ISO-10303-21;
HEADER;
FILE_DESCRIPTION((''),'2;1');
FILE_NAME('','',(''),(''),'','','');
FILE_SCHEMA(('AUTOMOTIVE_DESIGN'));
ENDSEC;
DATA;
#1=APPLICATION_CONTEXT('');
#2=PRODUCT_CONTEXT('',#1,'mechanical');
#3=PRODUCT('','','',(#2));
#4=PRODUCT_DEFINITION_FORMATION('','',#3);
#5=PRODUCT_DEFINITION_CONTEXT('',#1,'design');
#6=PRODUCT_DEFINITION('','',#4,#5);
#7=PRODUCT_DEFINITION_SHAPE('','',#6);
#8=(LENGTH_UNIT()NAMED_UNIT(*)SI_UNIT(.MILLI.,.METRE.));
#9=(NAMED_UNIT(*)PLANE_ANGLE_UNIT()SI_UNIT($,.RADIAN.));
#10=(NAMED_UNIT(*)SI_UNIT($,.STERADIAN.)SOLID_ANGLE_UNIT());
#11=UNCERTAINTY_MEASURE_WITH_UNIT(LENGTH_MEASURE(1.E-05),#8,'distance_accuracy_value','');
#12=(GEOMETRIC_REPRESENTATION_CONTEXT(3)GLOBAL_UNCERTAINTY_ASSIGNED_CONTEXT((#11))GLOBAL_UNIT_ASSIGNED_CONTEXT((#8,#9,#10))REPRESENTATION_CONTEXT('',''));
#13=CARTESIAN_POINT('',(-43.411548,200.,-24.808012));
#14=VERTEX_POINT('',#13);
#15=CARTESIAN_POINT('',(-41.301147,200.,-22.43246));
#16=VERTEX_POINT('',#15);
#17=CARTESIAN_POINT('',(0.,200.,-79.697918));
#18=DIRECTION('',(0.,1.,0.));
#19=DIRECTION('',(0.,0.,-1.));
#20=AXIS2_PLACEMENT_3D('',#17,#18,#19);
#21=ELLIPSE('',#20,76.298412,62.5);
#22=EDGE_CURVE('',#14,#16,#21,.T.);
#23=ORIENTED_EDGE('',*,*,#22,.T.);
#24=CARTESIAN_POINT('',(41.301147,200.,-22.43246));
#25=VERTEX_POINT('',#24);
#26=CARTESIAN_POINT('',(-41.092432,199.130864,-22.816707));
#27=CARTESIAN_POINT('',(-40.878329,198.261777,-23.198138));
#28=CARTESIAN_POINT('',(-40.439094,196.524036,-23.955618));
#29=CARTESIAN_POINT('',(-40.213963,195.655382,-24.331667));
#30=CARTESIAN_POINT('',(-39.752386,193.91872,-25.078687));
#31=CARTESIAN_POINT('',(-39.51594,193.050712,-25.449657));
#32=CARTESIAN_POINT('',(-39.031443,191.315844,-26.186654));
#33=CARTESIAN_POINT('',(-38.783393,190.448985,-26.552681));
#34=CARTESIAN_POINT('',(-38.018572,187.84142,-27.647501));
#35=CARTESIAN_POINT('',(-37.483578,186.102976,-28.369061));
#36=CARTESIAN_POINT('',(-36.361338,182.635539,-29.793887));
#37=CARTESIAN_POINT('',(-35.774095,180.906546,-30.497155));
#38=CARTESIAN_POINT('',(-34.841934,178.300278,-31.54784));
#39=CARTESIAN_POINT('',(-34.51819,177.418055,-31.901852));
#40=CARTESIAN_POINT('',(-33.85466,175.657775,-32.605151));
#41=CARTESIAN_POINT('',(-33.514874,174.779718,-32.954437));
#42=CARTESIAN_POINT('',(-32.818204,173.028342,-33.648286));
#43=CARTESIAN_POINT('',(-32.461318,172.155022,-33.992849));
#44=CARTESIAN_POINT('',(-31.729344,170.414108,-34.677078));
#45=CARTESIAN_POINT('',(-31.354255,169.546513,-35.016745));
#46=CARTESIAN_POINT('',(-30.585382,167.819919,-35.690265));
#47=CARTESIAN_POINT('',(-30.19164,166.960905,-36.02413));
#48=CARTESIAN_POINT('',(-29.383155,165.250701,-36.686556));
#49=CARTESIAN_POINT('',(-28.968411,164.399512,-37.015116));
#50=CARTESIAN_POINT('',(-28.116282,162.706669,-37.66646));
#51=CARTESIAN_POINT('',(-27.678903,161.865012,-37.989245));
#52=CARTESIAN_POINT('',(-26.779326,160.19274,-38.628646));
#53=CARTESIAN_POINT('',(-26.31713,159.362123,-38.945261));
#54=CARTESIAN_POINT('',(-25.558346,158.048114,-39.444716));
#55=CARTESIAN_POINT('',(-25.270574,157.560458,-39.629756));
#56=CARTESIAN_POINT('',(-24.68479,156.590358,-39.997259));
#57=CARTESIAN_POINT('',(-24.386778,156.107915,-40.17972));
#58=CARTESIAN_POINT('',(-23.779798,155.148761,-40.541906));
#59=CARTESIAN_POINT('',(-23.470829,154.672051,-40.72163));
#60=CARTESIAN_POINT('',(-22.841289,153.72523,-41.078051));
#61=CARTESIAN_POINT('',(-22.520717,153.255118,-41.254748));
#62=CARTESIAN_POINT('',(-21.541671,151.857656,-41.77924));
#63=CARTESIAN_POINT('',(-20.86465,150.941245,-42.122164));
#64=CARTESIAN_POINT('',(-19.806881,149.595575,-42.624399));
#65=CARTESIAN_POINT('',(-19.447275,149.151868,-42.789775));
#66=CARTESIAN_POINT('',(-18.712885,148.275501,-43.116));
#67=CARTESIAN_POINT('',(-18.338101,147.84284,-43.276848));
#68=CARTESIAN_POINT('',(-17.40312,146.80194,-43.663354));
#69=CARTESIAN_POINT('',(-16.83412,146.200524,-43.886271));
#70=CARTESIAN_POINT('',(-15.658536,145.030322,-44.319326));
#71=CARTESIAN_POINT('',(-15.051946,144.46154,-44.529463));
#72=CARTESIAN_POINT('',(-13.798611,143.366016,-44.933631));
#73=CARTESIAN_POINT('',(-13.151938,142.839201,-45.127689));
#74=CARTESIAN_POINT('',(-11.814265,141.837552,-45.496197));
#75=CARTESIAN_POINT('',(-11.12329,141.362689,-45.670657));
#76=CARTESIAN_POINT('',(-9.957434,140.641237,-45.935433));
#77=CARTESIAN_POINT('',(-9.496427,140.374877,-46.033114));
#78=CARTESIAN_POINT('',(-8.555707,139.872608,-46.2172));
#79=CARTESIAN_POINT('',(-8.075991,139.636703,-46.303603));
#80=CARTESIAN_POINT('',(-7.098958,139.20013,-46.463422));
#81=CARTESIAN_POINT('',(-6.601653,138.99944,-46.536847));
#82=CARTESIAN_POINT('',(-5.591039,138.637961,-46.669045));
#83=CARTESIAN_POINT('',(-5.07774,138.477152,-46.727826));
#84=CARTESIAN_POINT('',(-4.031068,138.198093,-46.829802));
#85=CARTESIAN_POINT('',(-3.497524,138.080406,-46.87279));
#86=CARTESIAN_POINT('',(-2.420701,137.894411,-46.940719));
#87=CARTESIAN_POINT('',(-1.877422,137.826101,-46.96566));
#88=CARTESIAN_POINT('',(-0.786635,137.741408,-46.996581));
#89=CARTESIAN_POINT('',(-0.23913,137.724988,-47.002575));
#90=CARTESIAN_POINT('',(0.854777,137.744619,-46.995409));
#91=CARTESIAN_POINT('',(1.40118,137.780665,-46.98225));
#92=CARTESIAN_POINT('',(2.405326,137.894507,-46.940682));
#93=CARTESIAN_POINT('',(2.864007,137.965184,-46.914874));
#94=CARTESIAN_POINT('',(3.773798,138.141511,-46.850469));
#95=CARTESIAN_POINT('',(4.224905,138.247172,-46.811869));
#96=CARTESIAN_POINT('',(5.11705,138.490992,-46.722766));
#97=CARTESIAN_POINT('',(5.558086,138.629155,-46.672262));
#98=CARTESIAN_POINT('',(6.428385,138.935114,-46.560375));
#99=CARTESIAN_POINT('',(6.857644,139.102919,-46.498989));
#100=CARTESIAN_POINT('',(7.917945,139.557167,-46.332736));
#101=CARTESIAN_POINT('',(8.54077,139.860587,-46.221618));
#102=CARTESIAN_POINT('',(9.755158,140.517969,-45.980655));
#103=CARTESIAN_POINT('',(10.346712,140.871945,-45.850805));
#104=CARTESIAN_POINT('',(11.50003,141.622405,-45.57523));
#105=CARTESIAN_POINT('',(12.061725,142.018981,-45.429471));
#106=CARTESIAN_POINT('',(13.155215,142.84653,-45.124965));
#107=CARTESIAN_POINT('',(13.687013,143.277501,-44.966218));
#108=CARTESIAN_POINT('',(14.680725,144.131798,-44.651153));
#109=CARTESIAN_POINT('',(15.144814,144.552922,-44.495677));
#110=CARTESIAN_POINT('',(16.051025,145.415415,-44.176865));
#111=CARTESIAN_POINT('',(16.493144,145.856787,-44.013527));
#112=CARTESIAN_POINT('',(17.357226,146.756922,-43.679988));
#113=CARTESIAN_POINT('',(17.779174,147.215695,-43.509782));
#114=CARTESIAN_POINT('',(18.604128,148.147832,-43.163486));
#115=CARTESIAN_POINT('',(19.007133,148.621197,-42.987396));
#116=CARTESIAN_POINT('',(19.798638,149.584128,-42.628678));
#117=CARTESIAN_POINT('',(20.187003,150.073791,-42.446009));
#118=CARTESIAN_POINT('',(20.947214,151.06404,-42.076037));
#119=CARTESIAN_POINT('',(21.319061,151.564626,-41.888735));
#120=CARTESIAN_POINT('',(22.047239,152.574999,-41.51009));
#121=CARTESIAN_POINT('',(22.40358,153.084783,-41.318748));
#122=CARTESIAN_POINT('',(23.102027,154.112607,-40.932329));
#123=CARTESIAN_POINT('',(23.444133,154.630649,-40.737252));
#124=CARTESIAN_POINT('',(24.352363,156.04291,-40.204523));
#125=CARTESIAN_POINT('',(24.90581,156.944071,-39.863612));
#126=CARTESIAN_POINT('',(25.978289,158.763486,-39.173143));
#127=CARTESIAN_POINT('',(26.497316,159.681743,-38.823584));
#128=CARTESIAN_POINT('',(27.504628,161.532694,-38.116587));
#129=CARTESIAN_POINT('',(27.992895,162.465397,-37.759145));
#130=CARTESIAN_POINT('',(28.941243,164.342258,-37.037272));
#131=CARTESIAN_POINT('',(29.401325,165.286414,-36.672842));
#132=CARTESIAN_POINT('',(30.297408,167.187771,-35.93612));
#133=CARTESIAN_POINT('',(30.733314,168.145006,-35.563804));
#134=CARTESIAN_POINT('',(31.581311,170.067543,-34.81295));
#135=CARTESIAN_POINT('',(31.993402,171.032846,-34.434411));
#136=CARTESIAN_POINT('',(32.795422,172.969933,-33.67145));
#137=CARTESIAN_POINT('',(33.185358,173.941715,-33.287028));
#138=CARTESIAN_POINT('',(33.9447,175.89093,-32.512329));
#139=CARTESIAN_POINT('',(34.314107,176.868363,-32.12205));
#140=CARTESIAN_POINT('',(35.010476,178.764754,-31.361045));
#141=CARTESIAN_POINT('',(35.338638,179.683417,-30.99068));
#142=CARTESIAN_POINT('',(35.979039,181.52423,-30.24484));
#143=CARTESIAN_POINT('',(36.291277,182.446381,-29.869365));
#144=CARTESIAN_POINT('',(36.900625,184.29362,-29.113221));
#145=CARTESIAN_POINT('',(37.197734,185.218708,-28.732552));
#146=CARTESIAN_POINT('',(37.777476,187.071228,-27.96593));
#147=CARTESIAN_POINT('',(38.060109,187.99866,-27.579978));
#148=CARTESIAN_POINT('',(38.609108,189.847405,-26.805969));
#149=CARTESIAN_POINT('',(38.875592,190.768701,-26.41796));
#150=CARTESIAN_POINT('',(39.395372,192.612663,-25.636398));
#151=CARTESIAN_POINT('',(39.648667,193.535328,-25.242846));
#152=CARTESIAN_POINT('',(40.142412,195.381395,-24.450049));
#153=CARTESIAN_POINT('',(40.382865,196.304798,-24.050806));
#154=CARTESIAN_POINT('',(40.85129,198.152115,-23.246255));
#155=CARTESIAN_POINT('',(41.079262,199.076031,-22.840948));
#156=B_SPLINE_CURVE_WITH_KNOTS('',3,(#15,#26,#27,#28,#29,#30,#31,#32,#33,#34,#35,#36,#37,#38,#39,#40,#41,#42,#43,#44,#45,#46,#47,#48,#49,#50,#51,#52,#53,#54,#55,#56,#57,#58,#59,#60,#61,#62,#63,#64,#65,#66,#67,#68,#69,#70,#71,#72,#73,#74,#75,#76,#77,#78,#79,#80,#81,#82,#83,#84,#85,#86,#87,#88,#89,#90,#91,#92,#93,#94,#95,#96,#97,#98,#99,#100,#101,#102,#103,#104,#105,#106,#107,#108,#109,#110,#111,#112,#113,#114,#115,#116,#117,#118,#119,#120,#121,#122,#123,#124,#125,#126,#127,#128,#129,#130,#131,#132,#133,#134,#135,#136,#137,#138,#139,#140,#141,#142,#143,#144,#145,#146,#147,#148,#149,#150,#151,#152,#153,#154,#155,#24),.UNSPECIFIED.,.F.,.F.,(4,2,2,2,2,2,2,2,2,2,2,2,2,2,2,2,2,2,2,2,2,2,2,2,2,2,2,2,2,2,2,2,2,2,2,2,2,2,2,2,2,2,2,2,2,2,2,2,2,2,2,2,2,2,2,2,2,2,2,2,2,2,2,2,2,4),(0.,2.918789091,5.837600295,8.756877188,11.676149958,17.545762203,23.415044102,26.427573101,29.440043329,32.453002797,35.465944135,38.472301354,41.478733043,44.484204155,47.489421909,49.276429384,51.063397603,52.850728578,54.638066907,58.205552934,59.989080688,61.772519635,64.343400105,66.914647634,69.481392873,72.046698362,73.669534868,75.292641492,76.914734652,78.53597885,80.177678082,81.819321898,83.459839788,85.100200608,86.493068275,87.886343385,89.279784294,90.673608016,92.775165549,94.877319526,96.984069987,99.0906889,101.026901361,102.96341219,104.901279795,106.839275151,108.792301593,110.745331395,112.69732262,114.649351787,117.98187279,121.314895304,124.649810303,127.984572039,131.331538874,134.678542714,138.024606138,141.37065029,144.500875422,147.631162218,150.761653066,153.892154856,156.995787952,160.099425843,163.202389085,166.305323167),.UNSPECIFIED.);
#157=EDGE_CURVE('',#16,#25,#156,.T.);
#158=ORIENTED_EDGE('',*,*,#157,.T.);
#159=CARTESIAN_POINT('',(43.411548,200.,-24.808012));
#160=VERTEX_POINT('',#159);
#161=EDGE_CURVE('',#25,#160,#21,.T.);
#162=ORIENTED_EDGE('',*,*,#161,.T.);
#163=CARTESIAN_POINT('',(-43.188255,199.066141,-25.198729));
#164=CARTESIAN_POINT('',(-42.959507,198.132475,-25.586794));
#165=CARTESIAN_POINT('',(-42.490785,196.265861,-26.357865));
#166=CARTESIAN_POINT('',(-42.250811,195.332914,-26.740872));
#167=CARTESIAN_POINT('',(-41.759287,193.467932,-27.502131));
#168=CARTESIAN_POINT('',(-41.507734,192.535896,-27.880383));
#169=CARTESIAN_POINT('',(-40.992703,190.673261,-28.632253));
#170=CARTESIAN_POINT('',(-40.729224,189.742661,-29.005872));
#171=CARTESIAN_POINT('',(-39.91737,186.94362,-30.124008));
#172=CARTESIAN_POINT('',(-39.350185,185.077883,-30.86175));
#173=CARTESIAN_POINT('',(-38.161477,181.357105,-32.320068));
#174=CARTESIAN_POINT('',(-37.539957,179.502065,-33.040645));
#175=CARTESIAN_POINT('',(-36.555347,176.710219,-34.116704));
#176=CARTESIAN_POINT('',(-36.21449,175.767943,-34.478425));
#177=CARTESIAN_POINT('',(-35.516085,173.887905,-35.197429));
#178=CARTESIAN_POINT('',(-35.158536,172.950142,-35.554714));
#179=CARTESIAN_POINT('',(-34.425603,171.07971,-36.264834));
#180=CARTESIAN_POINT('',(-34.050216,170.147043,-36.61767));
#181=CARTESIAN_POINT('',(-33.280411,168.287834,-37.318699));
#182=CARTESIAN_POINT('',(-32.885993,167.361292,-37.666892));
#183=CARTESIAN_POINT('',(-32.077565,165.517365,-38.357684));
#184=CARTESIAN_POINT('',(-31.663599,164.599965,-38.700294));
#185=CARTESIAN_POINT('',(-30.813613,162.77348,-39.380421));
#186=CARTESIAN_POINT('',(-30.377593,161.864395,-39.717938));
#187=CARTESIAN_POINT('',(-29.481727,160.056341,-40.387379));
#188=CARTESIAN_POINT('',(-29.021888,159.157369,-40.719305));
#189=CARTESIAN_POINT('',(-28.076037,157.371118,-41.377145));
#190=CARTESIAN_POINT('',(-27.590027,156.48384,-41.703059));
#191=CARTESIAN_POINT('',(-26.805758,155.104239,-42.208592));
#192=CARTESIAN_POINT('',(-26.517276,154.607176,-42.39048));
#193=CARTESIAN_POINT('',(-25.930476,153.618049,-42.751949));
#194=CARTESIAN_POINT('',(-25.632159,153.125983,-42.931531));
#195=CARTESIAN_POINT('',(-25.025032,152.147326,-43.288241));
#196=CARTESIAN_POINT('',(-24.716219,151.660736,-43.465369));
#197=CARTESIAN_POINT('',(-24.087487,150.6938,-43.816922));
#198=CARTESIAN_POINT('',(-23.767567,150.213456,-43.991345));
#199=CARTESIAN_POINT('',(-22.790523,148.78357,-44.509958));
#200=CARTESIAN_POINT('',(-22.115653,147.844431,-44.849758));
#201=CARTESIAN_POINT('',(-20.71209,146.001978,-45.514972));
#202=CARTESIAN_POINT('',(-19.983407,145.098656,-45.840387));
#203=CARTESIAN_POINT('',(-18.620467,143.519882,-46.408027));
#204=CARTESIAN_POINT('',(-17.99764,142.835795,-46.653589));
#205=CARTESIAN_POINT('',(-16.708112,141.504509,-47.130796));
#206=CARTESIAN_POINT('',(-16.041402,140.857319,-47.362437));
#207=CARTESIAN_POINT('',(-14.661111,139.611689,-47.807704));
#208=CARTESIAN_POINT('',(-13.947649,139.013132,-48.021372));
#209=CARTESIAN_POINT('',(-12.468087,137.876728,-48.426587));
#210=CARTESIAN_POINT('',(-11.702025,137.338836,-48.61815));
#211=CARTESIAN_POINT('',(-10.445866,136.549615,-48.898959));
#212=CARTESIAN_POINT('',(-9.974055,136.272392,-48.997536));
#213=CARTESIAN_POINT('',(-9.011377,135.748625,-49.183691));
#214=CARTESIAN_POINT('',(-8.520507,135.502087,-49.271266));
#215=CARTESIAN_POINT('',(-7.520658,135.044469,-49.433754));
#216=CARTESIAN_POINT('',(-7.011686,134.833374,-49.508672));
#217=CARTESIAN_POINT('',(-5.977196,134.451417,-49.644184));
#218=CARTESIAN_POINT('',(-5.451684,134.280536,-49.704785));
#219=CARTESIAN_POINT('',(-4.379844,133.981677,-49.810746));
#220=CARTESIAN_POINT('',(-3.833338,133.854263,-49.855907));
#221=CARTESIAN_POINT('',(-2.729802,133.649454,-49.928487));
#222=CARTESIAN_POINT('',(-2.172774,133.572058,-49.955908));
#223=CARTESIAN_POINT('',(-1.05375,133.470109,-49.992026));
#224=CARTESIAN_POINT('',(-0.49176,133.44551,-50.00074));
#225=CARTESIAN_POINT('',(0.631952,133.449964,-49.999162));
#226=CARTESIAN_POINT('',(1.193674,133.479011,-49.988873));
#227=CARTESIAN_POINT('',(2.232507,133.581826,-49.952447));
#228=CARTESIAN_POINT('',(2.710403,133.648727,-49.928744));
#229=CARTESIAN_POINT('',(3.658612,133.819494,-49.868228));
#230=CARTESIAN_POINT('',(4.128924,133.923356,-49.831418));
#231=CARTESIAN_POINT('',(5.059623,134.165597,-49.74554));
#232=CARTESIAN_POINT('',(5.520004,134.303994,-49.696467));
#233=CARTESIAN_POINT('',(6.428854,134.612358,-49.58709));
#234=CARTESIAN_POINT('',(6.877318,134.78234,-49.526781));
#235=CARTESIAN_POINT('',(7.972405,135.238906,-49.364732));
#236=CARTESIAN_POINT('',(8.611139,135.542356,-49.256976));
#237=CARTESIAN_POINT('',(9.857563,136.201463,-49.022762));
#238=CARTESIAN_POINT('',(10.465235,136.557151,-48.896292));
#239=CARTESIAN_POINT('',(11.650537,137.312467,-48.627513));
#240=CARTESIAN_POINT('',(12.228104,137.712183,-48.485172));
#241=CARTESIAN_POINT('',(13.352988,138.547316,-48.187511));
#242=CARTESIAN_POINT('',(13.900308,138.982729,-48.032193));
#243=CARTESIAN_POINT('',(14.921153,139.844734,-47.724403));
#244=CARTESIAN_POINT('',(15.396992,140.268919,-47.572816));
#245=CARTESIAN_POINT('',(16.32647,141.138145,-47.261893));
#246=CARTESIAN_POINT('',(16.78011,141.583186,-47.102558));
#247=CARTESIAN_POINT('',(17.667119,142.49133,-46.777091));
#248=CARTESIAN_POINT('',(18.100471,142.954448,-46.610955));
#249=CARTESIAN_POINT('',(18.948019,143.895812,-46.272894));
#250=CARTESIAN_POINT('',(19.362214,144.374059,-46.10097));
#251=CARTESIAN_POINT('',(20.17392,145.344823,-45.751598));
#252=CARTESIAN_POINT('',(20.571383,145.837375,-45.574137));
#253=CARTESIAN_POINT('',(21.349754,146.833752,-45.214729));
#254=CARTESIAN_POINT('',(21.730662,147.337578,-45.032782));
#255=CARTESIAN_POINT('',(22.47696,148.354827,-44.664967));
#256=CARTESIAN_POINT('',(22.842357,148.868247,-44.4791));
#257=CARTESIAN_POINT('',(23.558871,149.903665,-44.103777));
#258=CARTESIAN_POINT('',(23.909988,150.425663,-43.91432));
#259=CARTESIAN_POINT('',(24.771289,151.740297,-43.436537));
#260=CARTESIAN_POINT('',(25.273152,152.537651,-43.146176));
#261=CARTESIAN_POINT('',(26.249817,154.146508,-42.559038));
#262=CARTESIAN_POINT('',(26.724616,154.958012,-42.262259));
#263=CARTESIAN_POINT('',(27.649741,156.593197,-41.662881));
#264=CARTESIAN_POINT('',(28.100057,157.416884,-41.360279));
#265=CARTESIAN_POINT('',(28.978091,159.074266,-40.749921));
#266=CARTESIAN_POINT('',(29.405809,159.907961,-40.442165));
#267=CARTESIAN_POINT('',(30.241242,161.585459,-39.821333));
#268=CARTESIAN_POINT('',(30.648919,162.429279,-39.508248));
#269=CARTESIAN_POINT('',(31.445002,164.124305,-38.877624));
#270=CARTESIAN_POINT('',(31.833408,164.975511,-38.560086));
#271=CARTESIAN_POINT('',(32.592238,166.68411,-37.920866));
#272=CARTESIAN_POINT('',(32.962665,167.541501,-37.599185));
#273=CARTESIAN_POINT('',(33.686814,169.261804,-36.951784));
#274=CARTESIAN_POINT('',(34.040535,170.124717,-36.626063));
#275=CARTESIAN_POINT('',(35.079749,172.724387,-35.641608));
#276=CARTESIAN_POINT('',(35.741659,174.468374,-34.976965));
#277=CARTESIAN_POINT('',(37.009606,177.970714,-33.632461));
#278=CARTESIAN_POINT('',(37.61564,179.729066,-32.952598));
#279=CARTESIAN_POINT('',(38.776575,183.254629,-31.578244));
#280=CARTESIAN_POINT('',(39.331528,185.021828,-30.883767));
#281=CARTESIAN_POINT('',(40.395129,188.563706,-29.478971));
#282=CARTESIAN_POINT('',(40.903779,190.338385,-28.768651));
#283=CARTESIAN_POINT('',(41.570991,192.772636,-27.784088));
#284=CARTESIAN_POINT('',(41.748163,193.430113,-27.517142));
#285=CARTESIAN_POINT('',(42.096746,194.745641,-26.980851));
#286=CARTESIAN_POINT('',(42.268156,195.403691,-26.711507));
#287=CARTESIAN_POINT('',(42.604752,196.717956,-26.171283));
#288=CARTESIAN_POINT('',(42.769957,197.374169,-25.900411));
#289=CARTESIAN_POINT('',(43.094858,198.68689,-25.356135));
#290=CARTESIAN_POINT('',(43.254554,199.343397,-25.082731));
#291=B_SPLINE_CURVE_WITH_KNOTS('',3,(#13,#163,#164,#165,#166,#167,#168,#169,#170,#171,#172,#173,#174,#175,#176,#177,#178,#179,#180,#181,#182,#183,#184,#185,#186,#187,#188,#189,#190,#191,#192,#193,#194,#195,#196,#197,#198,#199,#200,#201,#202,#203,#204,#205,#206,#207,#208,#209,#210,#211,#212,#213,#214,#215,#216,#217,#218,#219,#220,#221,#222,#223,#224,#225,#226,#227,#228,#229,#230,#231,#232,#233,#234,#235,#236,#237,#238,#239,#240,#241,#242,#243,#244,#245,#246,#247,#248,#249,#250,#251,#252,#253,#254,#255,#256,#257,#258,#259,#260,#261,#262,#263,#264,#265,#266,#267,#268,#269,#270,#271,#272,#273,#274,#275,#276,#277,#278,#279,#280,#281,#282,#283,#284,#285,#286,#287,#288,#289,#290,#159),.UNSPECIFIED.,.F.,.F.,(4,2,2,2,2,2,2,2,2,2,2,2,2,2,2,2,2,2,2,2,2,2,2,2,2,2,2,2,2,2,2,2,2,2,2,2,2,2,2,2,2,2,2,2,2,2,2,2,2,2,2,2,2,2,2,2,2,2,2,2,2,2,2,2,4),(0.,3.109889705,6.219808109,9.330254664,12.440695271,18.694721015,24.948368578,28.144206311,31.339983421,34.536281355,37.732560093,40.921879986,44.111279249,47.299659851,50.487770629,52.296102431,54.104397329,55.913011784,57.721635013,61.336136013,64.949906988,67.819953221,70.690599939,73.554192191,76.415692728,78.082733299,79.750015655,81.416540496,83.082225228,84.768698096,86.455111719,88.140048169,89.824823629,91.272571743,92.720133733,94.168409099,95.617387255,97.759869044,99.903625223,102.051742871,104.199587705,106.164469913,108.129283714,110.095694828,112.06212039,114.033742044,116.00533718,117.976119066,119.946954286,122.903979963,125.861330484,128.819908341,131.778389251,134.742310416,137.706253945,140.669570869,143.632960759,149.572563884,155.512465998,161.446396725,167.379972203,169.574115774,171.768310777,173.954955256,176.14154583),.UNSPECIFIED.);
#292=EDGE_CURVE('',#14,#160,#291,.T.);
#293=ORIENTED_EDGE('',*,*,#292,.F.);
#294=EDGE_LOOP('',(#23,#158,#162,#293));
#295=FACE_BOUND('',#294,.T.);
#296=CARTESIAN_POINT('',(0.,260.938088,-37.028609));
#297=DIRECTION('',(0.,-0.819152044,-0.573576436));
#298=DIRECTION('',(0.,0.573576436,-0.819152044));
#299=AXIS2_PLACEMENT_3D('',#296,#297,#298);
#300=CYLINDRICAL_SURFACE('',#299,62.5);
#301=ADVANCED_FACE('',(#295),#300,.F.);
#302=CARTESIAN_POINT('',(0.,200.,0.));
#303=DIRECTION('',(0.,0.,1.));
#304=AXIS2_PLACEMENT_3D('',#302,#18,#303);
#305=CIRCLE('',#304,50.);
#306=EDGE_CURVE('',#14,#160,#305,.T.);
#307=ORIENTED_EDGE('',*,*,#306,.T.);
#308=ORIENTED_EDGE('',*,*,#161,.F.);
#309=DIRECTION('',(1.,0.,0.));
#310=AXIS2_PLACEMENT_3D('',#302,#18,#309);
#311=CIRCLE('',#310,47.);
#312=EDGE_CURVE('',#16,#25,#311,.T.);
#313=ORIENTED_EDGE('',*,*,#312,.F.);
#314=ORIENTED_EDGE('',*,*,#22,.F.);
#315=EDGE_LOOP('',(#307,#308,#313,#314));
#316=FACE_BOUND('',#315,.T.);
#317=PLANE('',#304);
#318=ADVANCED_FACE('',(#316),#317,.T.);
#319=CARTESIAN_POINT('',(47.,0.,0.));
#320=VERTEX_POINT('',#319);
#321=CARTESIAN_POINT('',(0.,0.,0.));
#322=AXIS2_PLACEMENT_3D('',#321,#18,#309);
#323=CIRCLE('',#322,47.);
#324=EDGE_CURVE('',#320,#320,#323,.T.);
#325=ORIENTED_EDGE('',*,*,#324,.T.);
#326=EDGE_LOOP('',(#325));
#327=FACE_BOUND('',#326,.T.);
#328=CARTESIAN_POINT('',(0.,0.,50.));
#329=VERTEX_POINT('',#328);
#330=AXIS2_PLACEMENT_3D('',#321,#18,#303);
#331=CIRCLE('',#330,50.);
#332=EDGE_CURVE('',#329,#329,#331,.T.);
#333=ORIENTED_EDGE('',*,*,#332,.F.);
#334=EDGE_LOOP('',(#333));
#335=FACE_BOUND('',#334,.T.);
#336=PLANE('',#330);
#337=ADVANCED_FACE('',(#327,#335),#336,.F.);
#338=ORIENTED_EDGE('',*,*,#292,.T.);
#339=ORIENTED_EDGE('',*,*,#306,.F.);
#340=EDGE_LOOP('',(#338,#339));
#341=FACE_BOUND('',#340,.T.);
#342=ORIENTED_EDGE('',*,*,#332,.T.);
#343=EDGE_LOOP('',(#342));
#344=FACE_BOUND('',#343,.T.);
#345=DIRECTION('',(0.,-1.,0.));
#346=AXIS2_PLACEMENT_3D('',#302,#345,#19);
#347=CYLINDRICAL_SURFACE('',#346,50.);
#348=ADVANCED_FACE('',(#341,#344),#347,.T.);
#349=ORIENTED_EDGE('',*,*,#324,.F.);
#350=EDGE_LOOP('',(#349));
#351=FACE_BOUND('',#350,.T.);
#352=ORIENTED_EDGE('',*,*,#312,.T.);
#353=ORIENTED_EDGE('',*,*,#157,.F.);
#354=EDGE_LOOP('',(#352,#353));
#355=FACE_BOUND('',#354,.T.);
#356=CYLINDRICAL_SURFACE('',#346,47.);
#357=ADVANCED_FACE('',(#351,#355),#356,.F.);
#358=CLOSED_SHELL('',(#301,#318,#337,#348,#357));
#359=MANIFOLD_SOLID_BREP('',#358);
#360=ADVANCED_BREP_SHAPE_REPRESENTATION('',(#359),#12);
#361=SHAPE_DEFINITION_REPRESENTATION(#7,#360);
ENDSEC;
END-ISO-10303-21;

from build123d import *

# Parameters (mm, degrees)
EXTRUDE_1_OUTLINE_R      = 50
EXTRUDE_1_OUTLINE_R_2    = 47
EXTRUDE_1_DEPTH          = 200
CUT_EXTRUDE_1_DEPTH      = 213.132034356
CUT_EXTRUDE_1_DEPTH_BACK = 213.132034356
SKETCH_2_R               = 62.5


# Read off the part's stored shape, not the designer's step: Вытянуть-Тонкостенный1
with BuildPart() as part:
    # Вытянуть-Тонкостенный1 outline → Вытянуть-Тонкостенный1 (new body)
    with BuildSketch(Plane(origin=(0, 0, 0), x_dir=(1, 0, 0), z_dir=(0, 1, 0))):
        Circle(EXTRUDE_1_OUTLINE_R)
        Circle(EXTRUDE_1_OUTLINE_R_2, mode=Mode.SUBTRACT)
    extrude(amount=EXTRUDE_1_DEPTH)

    # Эскиз2 → Вырез-Вытянуть1 (cut, two sides: drawn at the far end of the back side and taken through both)
    with BuildSketch(Plane(origin=(0, 0, 0), x_dir=(1, 0, 0), z_dir=(0, -0.819152044288991, -0.5735764363510473)).offset(-CUT_EXTRUDE_1_DEPTH_BACK)):
        with Locations((0, -180)):
            Circle(SKETCH_2_R)
    extrude(amount=CUT_EXTRUDE_1_DEPTH + CUT_EXTRUDE_1_DEPTH_BACK, mode=Mode.SUBTRACT)


solid = part.part
